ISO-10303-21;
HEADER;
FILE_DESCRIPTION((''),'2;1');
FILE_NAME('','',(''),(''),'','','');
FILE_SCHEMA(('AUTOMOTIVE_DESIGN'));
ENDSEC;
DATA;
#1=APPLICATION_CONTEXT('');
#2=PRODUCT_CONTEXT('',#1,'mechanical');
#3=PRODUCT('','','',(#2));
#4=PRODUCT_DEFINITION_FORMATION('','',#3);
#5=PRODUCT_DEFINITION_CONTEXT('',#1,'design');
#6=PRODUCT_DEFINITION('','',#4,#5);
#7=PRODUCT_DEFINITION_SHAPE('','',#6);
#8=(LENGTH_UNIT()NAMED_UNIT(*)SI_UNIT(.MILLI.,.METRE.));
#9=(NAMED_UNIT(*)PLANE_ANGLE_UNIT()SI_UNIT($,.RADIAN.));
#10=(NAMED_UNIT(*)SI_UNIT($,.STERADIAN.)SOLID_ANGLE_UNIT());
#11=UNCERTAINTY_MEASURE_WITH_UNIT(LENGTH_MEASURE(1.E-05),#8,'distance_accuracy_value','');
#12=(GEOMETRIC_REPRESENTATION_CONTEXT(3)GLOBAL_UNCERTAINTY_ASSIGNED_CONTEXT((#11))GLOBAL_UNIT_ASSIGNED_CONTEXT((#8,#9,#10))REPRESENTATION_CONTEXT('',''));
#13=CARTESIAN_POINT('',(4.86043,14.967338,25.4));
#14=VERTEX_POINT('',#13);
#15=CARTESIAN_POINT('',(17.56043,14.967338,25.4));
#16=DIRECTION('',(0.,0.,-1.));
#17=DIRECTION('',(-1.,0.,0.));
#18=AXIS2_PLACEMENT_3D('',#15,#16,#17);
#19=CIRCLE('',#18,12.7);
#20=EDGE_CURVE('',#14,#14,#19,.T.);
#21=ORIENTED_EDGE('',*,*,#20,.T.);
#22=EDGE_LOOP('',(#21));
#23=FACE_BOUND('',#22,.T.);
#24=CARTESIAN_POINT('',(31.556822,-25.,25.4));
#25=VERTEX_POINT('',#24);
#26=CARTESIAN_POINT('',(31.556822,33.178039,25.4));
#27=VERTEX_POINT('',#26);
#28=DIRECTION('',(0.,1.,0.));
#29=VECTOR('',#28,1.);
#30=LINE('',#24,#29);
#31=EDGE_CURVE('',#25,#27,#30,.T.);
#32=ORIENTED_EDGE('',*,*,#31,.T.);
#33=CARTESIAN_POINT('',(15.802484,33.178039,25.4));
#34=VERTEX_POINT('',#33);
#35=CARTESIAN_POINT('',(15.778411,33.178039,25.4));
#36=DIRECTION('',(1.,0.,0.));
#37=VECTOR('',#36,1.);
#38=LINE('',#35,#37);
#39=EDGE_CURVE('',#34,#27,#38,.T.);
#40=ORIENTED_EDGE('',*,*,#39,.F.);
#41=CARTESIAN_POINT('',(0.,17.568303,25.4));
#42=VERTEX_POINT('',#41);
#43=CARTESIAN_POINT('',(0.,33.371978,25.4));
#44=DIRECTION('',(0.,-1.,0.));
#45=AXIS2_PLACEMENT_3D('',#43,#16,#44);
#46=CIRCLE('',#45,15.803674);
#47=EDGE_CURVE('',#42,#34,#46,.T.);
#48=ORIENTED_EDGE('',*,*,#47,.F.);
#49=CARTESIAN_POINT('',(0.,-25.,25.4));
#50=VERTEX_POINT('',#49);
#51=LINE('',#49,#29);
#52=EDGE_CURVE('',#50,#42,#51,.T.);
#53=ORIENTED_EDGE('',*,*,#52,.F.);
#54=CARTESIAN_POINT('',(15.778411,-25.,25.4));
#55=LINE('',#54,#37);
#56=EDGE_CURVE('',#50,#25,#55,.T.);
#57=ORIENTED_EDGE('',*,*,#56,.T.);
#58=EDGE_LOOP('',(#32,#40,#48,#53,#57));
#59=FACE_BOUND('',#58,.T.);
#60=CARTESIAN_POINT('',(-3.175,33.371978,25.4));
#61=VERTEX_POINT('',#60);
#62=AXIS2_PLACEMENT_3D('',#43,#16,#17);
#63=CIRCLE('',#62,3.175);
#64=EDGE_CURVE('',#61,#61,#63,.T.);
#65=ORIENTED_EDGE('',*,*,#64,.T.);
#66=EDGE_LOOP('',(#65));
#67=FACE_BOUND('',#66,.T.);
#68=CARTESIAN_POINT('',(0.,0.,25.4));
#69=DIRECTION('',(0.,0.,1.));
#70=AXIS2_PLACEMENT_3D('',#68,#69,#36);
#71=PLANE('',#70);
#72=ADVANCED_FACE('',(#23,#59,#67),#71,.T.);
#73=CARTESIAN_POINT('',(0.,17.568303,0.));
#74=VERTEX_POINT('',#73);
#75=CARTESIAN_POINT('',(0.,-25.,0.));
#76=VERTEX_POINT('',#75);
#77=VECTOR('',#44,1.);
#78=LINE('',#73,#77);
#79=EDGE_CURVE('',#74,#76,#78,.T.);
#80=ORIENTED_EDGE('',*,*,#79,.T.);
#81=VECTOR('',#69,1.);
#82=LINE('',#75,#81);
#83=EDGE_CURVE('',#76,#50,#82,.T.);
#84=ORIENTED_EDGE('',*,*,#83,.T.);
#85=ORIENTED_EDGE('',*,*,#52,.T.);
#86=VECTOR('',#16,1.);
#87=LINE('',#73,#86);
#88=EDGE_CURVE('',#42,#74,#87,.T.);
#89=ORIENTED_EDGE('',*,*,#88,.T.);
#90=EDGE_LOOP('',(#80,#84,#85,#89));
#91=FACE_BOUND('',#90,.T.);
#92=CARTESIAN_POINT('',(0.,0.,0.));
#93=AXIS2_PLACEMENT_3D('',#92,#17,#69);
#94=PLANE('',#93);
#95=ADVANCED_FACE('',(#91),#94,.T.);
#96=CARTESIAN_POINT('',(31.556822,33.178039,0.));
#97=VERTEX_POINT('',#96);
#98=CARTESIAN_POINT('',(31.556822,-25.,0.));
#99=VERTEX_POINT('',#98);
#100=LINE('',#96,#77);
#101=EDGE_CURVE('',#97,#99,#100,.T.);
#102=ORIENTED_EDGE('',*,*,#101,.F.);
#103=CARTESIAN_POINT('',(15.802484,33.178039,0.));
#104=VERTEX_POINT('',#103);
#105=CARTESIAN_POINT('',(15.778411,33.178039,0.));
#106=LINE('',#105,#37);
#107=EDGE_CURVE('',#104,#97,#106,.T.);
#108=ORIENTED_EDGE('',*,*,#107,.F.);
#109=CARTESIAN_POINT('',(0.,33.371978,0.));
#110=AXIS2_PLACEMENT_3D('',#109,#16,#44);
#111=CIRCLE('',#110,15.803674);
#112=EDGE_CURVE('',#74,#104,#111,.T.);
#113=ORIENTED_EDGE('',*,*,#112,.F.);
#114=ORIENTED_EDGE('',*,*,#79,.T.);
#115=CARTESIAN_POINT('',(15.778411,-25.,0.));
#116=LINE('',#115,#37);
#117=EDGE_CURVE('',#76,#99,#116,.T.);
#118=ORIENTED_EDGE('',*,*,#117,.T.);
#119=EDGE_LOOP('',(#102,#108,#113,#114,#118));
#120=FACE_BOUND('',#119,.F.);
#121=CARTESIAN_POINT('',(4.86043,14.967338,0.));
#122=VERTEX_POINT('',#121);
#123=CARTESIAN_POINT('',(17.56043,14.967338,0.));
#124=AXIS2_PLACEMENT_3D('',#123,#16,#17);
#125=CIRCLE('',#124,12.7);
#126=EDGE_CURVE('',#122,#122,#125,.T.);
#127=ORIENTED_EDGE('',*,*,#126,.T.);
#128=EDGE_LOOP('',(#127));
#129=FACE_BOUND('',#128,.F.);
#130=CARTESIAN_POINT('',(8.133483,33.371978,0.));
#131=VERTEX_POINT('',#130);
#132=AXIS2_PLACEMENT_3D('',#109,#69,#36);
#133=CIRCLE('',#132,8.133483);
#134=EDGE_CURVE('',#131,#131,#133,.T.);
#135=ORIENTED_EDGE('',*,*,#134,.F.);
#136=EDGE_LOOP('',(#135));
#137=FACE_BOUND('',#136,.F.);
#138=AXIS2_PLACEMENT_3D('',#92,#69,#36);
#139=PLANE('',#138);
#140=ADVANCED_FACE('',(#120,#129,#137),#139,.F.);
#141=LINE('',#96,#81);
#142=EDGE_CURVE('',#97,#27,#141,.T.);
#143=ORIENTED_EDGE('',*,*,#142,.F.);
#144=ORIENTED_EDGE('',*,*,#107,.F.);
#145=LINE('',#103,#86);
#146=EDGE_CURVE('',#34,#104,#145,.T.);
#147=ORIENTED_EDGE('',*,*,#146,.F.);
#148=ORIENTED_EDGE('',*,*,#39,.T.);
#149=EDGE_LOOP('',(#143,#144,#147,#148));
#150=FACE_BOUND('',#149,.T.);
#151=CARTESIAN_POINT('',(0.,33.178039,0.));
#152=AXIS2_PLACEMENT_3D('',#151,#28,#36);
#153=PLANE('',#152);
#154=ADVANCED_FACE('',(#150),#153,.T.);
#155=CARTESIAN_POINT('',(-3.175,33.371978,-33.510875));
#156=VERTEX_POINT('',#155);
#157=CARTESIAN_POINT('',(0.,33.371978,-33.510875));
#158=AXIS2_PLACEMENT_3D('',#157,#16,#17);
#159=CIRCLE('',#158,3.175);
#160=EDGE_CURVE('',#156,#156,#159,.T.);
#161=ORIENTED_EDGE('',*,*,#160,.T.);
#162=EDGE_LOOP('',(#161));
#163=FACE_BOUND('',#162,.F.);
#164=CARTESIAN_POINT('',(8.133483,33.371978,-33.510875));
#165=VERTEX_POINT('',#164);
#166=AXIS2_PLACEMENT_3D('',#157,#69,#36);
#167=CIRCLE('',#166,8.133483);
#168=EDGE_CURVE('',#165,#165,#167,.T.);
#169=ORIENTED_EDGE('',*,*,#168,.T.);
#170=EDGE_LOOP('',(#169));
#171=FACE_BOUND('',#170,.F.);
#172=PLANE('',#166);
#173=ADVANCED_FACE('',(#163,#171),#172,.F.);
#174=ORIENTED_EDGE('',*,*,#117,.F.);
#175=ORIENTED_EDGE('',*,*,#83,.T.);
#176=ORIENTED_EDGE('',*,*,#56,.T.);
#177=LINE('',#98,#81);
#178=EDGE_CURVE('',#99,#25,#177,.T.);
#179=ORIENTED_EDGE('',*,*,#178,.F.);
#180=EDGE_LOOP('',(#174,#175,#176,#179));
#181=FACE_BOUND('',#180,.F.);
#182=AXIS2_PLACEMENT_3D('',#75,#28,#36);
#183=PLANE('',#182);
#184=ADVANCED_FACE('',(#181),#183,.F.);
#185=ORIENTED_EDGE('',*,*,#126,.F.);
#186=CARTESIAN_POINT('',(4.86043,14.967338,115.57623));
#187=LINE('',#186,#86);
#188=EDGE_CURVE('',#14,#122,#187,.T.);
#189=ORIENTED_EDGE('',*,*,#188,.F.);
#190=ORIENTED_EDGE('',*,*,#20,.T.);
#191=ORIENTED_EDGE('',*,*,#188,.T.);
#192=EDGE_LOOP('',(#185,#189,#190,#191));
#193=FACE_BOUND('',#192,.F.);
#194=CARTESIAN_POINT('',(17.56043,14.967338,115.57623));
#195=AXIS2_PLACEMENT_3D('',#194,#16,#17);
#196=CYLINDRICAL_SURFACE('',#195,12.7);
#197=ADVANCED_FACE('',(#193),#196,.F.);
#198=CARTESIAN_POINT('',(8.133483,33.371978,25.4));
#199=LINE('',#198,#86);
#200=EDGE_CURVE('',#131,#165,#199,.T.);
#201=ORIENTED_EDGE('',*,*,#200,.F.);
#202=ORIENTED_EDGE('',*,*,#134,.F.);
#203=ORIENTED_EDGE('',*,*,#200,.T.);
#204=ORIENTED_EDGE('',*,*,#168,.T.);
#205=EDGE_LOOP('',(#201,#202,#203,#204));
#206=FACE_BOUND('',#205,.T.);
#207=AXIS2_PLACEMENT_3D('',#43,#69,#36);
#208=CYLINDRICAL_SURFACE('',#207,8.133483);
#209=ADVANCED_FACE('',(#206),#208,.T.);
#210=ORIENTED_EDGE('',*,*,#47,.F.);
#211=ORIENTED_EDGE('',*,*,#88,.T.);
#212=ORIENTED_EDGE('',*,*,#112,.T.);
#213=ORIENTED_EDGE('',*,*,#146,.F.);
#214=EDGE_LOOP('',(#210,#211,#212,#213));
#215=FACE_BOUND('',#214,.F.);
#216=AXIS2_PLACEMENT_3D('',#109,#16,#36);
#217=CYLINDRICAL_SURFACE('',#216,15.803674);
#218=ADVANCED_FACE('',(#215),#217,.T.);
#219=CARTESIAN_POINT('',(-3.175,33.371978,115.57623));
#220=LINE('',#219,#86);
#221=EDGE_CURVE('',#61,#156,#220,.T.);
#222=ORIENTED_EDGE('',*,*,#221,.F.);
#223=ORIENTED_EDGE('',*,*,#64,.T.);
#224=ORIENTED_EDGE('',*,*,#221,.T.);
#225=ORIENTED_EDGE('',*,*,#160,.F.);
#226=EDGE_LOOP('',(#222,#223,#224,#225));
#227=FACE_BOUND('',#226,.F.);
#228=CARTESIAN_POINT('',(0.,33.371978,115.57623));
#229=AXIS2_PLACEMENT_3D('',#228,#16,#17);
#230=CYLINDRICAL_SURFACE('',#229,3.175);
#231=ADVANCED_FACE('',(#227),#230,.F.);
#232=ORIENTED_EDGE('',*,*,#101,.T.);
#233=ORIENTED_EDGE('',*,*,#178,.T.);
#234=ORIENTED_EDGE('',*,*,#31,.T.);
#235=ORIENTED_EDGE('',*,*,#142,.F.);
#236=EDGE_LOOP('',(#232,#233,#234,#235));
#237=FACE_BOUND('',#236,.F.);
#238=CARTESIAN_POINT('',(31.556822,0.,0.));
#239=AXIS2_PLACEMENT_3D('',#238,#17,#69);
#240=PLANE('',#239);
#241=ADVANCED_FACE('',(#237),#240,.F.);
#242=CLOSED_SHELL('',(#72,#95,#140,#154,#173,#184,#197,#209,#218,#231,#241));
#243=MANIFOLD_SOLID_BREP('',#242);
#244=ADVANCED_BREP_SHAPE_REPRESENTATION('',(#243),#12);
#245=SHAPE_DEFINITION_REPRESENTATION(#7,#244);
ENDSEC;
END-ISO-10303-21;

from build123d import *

# Parameters (mm, degrees)
F1_R      = 15.8036743057
F2_DEPTH  = 25.4
F0_W      = 31.5568223596
F0_H      = 33.1780388951
F3_DEPTH  = 25.4
F4_R      = 8.1334827116
F5_DEPTH  = 58.9108746499
F7_D      = 6.35
F9_D      = 25.4
F14_DEPTH = 25


# Not quite as in the source:
# - the program builds the solid bodies; features that only make, move or delete a surface that nothing else refers to are left out


with BuildPart() as f2:
    # F1 (on face) → F2 (new body)
    with BuildSketch(Plane.XY):
        with Locations((0, 33.3719775081)):
            Circle(F1_R)
    extrude(amount=F2_DEPTH)

    # F0 (on Top) → F3 (join)
    with BuildSketch(Plane.XY):
        with Locations((15.7784111798, 16.5890194476)):
            Rectangle(F0_W, F0_H)
    extrude(amount=F3_DEPTH)

    # F4 (on face) → F5 (join)
    with BuildSketch(Plane.XY.offset(25.4)):
        with Locations((0, 33.3719775081)):
            Circle(F4_R)
    extrude(amount=-F5_DEPTH)

    # F7 (through all)
    with Locations(Plane.XY.offset(25.4)):
        with Locations((0, 33.3719775081)):
            Hole(F7_D / 2)

    # F9 (through all)
    with Locations(Plane.XY.offset(25.4)):
        with Locations((17.5604298711, 14.967338182)):
            Hole(F9_D / 2)

    # F14 (add): a face of the model
    f14_faces = [f2.faces().sort_by_distance(p)[0] for p in [
        (15.7784111798, 0, 12.7),
    ]]
    extrude(f14_faces, amount=F14_DEPTH)


solid = f2.part
